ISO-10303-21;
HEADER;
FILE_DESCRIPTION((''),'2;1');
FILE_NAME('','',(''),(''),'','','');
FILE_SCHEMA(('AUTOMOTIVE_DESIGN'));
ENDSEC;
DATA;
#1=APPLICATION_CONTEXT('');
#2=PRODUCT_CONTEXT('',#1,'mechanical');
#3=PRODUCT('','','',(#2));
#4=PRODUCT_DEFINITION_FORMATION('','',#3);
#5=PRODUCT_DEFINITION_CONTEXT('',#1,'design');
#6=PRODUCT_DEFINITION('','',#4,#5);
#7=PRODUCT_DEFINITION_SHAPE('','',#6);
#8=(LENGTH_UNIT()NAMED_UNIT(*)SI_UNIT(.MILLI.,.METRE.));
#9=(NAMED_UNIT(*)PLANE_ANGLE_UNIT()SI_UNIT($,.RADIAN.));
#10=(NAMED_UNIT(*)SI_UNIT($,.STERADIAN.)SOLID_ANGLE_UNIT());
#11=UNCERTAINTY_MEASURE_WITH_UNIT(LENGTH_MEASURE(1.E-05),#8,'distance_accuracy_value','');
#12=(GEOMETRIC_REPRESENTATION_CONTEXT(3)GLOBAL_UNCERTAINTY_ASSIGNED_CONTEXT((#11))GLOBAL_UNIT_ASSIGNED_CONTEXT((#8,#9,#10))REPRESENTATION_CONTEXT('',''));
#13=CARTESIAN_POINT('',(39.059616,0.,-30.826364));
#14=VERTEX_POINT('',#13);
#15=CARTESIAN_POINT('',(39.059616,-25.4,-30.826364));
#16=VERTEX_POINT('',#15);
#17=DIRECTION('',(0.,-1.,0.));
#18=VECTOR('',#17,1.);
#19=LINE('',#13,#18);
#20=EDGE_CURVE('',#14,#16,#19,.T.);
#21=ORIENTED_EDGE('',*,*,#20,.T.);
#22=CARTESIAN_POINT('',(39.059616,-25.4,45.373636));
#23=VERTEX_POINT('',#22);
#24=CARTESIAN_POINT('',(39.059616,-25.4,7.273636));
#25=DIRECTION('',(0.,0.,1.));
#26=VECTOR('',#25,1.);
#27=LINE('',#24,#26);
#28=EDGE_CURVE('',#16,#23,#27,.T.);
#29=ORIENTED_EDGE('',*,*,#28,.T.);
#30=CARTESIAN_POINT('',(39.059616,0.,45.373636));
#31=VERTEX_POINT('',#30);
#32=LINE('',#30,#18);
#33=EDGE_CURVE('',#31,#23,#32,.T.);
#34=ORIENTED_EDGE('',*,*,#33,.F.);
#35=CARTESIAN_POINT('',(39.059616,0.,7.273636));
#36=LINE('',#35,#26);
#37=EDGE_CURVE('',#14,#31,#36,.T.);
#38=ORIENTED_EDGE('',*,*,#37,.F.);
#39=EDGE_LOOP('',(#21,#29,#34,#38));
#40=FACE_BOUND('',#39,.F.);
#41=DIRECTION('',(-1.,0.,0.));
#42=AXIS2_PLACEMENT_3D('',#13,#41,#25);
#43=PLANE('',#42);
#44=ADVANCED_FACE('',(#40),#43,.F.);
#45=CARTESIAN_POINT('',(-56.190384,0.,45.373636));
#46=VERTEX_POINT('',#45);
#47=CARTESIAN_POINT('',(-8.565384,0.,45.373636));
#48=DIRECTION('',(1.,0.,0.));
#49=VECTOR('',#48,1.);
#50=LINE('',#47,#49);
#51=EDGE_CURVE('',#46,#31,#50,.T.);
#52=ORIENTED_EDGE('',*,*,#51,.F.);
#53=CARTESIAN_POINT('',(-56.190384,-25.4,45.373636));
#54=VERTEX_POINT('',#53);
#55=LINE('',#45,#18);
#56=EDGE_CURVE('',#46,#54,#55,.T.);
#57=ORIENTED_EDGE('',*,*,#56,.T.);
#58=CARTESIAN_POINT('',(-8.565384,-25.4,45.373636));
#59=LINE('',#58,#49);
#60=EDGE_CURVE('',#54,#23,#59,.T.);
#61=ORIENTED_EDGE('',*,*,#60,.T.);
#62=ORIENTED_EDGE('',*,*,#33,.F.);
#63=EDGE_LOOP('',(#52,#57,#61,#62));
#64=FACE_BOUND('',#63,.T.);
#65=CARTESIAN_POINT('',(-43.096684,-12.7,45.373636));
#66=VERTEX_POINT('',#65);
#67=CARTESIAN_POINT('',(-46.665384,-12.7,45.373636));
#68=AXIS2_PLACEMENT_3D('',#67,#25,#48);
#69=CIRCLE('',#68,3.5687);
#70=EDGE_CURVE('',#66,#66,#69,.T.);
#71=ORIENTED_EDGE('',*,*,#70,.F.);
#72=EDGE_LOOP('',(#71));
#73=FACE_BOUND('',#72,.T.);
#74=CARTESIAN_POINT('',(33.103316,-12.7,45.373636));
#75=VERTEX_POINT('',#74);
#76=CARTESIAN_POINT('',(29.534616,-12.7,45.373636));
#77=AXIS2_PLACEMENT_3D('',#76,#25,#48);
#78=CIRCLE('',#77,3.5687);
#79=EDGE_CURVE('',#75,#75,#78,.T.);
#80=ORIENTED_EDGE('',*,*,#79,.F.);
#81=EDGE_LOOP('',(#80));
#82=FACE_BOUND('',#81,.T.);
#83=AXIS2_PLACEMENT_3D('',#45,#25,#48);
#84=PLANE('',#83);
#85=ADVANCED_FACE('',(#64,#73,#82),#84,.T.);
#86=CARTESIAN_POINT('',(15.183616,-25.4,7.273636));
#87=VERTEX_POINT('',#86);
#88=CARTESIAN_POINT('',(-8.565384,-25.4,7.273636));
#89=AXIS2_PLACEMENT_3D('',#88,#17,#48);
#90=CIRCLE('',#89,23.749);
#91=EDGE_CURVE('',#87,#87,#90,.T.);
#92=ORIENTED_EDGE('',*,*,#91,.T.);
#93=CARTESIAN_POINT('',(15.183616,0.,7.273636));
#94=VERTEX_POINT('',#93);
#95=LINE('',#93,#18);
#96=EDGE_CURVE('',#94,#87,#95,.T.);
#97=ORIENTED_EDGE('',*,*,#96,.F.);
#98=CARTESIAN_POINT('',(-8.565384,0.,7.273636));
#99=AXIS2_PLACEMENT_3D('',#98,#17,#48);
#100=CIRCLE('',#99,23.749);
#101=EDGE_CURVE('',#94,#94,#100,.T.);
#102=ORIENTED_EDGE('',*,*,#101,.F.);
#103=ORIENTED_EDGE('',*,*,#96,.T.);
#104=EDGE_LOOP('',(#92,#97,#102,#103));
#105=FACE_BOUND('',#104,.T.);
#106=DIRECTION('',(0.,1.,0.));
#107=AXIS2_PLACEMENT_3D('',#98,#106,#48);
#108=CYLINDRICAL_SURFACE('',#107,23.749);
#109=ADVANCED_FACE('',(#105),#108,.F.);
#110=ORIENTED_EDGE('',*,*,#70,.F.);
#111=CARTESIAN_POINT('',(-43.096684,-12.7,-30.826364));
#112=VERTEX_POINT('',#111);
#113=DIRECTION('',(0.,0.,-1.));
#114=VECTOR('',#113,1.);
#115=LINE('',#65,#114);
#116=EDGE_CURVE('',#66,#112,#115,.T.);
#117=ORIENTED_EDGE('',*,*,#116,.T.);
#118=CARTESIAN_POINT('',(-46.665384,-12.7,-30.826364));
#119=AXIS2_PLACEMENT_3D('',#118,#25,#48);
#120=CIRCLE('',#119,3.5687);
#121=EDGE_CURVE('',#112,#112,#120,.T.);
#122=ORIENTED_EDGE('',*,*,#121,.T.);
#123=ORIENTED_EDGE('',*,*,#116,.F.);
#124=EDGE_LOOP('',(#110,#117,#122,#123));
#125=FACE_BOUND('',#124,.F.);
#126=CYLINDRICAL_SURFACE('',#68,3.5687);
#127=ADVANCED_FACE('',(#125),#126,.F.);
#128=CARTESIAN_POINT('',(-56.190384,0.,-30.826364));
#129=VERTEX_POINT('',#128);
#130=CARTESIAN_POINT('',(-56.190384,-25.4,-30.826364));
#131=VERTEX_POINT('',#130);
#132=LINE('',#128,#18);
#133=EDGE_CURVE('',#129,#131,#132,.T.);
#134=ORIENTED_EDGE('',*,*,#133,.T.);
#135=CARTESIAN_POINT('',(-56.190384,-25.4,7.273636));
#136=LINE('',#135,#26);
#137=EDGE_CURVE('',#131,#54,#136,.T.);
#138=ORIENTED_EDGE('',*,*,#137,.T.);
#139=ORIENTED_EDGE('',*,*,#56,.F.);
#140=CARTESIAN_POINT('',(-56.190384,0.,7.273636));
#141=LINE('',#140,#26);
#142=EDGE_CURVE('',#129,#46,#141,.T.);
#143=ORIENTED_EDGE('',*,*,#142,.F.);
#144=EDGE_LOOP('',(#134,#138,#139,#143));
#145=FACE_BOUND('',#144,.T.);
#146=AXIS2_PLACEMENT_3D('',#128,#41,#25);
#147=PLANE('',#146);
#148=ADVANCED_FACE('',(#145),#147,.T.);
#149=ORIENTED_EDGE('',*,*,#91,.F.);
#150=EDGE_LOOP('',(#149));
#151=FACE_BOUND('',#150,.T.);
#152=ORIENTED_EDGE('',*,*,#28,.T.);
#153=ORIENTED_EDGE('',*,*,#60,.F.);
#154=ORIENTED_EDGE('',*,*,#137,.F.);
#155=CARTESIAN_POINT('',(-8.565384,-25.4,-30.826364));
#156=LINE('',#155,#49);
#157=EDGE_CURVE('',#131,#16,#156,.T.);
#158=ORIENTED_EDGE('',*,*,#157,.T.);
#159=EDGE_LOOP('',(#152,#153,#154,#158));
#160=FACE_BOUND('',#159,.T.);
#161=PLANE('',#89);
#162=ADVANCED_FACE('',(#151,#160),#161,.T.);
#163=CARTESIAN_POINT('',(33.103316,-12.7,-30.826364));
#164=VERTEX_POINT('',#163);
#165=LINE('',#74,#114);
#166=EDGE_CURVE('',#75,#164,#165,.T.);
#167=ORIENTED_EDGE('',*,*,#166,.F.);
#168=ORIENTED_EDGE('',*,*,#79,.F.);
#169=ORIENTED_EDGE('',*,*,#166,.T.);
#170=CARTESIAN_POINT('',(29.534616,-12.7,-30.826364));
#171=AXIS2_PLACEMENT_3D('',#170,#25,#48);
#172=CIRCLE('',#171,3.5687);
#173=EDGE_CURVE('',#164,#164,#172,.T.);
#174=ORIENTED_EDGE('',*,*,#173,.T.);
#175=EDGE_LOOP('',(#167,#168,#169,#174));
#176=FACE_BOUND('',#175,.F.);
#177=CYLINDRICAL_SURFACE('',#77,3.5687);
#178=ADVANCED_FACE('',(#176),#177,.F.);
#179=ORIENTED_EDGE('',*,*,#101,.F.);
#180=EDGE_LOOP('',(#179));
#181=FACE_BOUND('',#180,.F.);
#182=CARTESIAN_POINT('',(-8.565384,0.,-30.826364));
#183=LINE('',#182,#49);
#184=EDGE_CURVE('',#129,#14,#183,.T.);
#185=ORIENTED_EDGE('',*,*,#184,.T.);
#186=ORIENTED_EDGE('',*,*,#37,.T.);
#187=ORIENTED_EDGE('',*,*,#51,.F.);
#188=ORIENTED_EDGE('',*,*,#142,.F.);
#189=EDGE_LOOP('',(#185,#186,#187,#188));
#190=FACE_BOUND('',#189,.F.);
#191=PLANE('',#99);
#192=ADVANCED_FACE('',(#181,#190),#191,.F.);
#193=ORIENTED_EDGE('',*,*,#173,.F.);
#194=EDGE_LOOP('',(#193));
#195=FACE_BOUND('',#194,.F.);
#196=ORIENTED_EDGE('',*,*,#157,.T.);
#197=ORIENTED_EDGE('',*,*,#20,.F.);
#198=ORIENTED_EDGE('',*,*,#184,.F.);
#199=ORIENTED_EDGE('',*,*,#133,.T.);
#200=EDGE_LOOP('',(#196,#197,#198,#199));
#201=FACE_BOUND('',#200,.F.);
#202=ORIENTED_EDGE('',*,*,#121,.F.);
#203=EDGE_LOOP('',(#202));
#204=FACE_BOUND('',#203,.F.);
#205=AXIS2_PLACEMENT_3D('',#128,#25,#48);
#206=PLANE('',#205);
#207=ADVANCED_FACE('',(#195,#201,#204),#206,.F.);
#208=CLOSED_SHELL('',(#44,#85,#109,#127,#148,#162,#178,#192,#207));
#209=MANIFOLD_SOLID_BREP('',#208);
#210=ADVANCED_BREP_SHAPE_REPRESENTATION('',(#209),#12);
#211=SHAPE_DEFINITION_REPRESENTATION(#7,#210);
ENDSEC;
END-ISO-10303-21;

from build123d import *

# Parameters (mm, degrees)
F0_W     = 95.25
F0_H     = 76.2
F0_R     = 23.749
F1_DEPTH = 25.4
F2_R     = 3.5687
F3_DEPTH = 76.201
F4_DEPTH = 76.201


# Not quite as in the source:
# - a feature names something its author has since deleted; it is built from what else it names


with BuildPart() as f1:
    # F0 (on Front) → F1 (new body)
    with BuildSketch(Plane.XZ):
        with Locations((-8.5653835568, 7.273635827)):
            Rectangle(F0_W, F0_H)
        with Locations((-8.5653835568, 7.273635827)):
            Circle(F0_R, mode=Mode.SUBTRACT)
    extrude(amount=F1_DEPTH)

    # F2 (on face) → F3 (cut, through all)
    with BuildSketch(Plane.XY.offset(45.373635827)):
        with Locations((-46.6653835568, -12.7)):
            Circle(F2_R)
    extrude(amount=-F3_DEPTH, mode=Mode.SUBTRACT)

    # F2 (on face) → F4 (cut, through all)
    with BuildSketch(Plane.XY.offset(45.373635827)):
        with Locations((-46.6653835568, -12.7)):
            Circle(F2_R)
        with Locations((29.5346164432, -12.7)):
            Circle(F2_R)
    extrude(amount=-F4_DEPTH, mode=Mode.SUBTRACT)


solid = f1.part
